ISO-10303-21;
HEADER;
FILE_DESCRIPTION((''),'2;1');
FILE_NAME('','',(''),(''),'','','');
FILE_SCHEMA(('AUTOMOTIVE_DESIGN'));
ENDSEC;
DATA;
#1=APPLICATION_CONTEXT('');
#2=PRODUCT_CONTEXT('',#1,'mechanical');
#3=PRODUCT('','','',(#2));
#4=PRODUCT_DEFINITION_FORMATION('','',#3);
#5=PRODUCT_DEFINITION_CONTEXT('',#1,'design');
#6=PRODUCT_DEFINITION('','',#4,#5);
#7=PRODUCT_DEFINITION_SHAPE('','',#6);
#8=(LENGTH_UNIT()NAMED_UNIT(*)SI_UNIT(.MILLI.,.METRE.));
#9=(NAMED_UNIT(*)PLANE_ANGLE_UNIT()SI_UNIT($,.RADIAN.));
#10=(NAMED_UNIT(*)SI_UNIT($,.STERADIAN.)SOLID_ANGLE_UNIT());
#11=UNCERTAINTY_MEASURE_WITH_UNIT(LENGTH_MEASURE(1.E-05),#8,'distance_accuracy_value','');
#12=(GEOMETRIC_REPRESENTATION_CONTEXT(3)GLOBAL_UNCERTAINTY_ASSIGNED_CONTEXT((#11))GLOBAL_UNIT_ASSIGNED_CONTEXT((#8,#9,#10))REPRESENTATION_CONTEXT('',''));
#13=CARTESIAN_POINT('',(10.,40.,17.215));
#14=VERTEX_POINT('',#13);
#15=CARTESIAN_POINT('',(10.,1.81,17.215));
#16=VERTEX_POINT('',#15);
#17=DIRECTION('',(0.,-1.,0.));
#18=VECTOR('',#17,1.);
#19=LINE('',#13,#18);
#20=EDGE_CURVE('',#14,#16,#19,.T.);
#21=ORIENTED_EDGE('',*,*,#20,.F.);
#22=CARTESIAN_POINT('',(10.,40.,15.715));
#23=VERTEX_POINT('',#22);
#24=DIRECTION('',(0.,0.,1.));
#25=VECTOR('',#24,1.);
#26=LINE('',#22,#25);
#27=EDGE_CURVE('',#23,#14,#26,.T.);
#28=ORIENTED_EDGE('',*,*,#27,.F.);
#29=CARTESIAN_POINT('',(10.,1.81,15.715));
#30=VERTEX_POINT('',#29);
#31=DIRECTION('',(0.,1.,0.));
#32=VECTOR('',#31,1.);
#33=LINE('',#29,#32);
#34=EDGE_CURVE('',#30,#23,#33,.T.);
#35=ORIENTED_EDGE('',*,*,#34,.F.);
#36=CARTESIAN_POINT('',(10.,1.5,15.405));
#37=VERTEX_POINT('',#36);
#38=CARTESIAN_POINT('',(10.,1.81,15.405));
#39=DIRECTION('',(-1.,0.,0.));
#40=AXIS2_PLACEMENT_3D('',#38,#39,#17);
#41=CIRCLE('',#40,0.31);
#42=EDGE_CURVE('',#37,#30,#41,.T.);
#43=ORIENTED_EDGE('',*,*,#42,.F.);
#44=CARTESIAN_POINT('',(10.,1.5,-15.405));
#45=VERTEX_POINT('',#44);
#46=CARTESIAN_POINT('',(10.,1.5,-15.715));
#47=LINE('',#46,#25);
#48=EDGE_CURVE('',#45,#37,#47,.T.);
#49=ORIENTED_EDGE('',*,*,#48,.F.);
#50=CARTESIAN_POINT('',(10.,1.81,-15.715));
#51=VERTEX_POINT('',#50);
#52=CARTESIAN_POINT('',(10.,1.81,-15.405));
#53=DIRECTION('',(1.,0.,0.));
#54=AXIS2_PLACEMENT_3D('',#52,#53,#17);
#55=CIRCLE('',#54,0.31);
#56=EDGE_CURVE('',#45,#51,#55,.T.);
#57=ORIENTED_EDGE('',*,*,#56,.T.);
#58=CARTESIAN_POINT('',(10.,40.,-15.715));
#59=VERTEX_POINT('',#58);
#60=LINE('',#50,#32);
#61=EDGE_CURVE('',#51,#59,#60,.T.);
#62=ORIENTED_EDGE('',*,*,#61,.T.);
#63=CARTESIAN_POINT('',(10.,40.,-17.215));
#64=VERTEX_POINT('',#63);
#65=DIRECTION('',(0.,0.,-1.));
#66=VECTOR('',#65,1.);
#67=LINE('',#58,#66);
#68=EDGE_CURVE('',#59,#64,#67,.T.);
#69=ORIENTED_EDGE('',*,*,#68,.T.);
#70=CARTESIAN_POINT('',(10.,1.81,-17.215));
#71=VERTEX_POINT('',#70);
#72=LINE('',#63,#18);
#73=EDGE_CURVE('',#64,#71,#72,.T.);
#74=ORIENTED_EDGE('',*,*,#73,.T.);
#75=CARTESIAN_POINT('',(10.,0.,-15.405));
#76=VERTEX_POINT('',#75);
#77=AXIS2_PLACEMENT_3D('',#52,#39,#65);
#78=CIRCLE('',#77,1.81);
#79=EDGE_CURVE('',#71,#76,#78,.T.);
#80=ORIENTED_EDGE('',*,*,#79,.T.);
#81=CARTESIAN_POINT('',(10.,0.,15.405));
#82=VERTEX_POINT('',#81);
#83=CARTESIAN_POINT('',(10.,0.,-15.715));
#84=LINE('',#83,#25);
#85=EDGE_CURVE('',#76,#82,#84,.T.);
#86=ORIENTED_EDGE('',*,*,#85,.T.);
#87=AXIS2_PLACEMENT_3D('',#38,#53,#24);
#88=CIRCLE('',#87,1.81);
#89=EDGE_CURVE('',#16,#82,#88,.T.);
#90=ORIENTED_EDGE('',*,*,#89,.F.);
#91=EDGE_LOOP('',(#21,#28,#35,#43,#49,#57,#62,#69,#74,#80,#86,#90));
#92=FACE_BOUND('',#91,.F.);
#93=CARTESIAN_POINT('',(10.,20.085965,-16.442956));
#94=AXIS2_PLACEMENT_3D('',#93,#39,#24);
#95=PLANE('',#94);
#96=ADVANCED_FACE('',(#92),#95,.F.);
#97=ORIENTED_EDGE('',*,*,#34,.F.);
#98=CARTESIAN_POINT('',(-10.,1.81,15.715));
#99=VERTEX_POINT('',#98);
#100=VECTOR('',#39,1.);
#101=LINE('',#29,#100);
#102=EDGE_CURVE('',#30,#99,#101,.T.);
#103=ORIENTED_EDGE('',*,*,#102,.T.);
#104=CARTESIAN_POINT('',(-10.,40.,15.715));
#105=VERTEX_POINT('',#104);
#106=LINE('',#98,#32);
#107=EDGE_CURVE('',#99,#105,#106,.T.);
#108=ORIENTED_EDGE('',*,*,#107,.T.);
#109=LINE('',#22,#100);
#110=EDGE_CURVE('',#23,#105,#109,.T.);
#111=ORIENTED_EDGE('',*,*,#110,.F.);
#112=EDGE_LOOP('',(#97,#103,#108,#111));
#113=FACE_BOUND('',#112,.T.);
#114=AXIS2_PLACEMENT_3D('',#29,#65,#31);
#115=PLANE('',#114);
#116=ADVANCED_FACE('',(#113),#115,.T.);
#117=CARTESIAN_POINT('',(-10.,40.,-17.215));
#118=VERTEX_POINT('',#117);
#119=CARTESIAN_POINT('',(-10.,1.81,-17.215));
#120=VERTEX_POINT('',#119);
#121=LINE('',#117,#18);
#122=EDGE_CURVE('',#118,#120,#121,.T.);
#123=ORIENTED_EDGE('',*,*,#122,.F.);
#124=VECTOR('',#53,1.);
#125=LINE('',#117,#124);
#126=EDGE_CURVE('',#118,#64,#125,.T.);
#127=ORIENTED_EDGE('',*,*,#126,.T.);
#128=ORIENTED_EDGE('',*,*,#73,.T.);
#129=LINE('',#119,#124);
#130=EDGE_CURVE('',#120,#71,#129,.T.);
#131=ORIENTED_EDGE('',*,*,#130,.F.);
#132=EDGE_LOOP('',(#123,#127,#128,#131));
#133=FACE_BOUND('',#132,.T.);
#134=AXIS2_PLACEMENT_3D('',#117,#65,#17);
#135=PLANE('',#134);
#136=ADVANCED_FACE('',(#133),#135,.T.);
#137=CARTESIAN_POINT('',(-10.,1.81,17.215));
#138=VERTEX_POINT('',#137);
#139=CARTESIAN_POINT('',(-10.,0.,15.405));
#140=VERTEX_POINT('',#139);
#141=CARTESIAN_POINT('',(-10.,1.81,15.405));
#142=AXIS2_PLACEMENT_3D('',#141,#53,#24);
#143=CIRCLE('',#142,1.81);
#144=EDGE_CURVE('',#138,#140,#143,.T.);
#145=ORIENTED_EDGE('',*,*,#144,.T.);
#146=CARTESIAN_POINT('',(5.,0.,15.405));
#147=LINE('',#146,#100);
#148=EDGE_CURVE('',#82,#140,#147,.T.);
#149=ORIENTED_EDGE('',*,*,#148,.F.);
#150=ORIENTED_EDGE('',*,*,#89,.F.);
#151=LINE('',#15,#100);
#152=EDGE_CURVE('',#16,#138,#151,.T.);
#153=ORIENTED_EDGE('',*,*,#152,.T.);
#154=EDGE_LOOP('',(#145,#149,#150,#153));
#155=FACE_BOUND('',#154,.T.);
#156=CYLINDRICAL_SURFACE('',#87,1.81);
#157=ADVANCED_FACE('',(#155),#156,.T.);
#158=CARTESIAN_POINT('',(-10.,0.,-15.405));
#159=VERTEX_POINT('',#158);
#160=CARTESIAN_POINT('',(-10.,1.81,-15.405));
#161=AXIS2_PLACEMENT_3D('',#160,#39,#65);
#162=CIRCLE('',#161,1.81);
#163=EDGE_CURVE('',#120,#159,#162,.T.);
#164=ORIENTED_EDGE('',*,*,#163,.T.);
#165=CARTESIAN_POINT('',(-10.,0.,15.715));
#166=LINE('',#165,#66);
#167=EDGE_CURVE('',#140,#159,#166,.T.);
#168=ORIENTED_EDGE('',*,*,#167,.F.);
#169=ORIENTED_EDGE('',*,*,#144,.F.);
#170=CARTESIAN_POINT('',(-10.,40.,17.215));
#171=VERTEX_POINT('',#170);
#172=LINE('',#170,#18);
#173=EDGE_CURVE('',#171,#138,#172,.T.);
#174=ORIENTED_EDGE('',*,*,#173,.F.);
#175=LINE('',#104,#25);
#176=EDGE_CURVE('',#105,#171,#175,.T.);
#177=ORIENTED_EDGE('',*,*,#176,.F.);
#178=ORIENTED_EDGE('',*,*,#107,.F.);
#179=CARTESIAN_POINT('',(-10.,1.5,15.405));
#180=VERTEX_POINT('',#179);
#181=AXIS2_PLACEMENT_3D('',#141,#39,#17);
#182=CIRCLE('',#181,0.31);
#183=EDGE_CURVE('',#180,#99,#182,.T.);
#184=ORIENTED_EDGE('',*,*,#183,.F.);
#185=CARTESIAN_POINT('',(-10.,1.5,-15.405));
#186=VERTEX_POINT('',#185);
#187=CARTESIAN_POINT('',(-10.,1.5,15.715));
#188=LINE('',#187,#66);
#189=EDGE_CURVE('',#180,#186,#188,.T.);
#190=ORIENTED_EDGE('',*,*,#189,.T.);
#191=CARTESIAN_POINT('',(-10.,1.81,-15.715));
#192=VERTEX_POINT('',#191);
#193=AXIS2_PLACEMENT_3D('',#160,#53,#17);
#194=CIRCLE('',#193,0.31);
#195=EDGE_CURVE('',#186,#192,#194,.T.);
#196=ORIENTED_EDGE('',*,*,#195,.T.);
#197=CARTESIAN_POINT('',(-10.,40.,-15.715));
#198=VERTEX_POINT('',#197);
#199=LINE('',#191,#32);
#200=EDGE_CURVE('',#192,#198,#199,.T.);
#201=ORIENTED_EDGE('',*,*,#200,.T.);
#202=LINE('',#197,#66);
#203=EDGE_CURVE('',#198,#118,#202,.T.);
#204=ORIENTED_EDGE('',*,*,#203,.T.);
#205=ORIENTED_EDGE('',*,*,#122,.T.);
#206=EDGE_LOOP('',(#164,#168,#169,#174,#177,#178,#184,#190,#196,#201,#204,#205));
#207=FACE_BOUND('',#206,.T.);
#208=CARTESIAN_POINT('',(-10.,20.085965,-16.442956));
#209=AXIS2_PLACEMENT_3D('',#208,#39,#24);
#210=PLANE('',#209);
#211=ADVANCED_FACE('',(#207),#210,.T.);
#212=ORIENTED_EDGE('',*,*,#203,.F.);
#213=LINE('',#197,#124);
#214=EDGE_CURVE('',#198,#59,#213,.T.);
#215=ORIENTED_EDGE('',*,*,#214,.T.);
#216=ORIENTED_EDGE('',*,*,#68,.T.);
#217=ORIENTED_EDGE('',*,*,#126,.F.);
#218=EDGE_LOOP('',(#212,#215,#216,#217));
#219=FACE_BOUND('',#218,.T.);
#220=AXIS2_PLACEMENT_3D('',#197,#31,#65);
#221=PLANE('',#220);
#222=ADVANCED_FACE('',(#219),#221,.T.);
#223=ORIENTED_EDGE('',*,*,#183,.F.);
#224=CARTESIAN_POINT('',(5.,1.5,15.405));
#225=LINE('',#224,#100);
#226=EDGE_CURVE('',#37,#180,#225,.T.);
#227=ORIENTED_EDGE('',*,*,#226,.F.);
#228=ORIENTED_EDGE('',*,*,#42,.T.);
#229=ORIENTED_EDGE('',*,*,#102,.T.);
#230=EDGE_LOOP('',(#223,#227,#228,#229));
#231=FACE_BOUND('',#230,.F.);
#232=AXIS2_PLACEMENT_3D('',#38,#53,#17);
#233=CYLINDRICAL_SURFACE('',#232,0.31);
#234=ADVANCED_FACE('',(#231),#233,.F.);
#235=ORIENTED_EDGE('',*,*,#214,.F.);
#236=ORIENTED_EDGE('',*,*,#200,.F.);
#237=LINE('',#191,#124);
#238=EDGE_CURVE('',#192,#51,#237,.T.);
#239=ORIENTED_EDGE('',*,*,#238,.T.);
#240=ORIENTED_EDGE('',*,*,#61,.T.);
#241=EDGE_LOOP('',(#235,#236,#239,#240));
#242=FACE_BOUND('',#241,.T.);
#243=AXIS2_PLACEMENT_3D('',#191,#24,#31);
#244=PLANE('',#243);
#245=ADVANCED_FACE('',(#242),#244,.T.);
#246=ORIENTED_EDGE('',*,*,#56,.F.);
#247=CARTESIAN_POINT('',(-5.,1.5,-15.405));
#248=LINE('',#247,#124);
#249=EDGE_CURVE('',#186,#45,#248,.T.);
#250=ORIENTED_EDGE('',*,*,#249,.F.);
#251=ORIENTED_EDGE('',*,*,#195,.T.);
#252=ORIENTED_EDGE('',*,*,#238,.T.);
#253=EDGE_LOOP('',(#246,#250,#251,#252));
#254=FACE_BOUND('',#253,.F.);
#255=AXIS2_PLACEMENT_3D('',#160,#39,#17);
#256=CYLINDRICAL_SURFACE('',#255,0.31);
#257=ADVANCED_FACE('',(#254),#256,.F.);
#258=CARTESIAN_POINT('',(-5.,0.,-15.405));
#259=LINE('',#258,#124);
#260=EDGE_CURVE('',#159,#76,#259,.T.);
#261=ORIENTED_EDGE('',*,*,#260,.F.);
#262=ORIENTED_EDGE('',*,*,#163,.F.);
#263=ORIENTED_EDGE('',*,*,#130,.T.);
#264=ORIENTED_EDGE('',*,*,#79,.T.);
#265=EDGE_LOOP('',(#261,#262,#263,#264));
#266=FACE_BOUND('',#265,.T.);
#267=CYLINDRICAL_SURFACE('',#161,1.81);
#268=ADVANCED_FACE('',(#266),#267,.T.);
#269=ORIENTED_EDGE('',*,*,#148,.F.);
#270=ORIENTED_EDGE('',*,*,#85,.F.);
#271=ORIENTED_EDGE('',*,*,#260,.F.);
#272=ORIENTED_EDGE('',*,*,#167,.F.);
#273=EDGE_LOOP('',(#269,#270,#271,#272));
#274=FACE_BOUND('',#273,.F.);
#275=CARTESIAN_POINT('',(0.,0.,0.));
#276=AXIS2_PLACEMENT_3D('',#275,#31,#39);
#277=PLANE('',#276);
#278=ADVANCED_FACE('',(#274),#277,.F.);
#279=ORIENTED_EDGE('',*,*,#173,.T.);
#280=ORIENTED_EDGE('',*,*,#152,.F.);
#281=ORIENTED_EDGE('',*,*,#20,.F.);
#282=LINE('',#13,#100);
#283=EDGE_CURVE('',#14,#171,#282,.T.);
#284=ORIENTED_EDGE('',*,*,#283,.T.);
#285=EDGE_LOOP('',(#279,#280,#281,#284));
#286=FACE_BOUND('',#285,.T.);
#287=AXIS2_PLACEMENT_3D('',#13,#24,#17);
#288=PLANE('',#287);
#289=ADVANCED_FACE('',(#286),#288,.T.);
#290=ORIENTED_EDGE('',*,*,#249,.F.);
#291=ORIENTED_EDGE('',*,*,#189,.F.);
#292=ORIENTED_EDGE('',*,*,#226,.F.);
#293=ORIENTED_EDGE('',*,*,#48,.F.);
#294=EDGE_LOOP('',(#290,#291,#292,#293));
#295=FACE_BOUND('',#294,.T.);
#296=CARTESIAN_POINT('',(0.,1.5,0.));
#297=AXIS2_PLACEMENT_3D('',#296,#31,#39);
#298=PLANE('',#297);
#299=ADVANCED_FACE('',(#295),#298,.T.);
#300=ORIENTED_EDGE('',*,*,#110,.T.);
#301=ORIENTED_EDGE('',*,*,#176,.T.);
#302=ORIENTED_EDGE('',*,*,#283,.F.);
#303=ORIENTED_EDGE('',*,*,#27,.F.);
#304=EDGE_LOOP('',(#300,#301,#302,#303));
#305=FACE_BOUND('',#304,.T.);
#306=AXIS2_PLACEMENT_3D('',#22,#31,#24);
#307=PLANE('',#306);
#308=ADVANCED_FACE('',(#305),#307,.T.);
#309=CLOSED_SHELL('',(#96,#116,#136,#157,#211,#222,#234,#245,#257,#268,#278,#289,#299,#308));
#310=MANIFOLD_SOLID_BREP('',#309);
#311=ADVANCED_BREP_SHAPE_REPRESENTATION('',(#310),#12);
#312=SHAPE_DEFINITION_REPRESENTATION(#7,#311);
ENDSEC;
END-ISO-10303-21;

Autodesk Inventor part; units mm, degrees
ref_plane "YZ Plane" through (0, 0, 0) normal (1, 0, 0) x (0, 1, 0)
ref_plane "XZ Plane" through (0, 0, 0) normal (0, 1, 0) x (-1, 0, 0)
ref_plane "XY Plane" through (0, 0, 0) normal (0, 0, 1) x (1, 0, 0)
sketch "Sketch1" plane through (0, 0, 0) normal (0, 1, 0) x (-1, 0, 0)
  line L0 (10, -15.715) -> (-10, -15.715)
  line L1 (-10, -15.715) -> (-10, 15.715)
  line L2 (-10, 15.715) -> (10, 15.715)
  line L3 (10, 15.715) -> (10, -15.715)
  point P0 (0, 0)
  dimension "d0" = 20
  dimension "d1" = 31.43
  dimension "d2" = 10
  dimension "d3" = 15.715
extrude "Plate1" add sketch "Sketch1" along normal blind 1.5
sketch "Sketch2" plane through (10, 0, 17.215) normal (0, 0, -1) x (-1, 0, 0)
  line L0 (20, 0) -> (0, 0)
  line L1 (0, 0) -> (0, 40)
  line L2 (0, 40) -> (20, 40)
  line L3 (20, 40) -> (20, 0)
edge flange "Flange1" height 40 angle 90 thickness 1.5 bend radius 0.31 thickness toward (0, 0, -1) relief tear relief width 1.5 relief depth 0.75 edges at (0, 1.5, 15.715) wall of the first edge with corners at (-10, 0, 17.215) (10, 0, 17.215) (10, 40, 17.215) (-10, 40, 17.215)
bend "Bend1"
corner "Corner1"
sketch "Sketch3" plane through (-10, 0, -17.215) normal (0, 0, 1) x (1, 0, 0)
  line L0 (20, 0) -> (0, 0)
  line L1 (0, 0) -> (0, 40)
  line L2 (0, 40) -> (20, 40)
  line L3 (20, 40) -> (20, 0)
edge flange "Flange2" height 40 angle 90 thickness 1.5 bend radius 0.31 thickness toward (0, 0, 1) relief tear relief width 1.5 relief depth 0.75 edges at (0, 1.5, -15.715) wall of the first edge with corners at (10, 0, -17.215) (-10, 0, -17.215) (-10, 40, -17.215) (10, 40, -17.215)
bend "Bend2"
corner "Corner2"
equation "\"d4\" = Thickness"
equation "\"d5\" = BendReliefWidth"
equation "\"d6\" = BendReliefDepth"
equation "\"d7\" = MinimumRemnant"
equation "\"d8\" = TransitionRadius"
equation "\"d11\" = BendRadius"
equation "\"d12\" = CornerReliefSize"
equation "\"d13\" = GapSize"
equation "\"d14\" = JacobiRadiusSize"
equation "\"d15\" = BendReliefWidth"
equation "\"d16\" = BendReliefDepth"
equation "\"d17\" = MinimumRemnant"
equation "\"d18\" = TransitionRadius"
equation "\"d21\" = BendRadius"
equation "\"d22\" = CornerReliefSize"
equation "\"d23\" = GapSize"
equation "\"d24\" = JacobiRadiusSize"
equation "\"BendReliefWidth\" = Thickness"
equation "\"BendReliefDepth\" = 0.5 * Thickness"
equation "\"CornerReliefSize\" = 4 * Thickness"
equation "\"MinimumRemnant\" = 2 * Thickness"
equation "\"TransitionRadius\" = BendRadius"
equation "\"JacobiRadiusSize\" = BendRadius"
equation "\"GapSize\" = Thickness"
equation "\"Thickness\" = 1.5"
equation "\"BendRadius\" = 0.31"
properties part number "axis_7_top_frame" material "Aluminum 6061-AHC"
